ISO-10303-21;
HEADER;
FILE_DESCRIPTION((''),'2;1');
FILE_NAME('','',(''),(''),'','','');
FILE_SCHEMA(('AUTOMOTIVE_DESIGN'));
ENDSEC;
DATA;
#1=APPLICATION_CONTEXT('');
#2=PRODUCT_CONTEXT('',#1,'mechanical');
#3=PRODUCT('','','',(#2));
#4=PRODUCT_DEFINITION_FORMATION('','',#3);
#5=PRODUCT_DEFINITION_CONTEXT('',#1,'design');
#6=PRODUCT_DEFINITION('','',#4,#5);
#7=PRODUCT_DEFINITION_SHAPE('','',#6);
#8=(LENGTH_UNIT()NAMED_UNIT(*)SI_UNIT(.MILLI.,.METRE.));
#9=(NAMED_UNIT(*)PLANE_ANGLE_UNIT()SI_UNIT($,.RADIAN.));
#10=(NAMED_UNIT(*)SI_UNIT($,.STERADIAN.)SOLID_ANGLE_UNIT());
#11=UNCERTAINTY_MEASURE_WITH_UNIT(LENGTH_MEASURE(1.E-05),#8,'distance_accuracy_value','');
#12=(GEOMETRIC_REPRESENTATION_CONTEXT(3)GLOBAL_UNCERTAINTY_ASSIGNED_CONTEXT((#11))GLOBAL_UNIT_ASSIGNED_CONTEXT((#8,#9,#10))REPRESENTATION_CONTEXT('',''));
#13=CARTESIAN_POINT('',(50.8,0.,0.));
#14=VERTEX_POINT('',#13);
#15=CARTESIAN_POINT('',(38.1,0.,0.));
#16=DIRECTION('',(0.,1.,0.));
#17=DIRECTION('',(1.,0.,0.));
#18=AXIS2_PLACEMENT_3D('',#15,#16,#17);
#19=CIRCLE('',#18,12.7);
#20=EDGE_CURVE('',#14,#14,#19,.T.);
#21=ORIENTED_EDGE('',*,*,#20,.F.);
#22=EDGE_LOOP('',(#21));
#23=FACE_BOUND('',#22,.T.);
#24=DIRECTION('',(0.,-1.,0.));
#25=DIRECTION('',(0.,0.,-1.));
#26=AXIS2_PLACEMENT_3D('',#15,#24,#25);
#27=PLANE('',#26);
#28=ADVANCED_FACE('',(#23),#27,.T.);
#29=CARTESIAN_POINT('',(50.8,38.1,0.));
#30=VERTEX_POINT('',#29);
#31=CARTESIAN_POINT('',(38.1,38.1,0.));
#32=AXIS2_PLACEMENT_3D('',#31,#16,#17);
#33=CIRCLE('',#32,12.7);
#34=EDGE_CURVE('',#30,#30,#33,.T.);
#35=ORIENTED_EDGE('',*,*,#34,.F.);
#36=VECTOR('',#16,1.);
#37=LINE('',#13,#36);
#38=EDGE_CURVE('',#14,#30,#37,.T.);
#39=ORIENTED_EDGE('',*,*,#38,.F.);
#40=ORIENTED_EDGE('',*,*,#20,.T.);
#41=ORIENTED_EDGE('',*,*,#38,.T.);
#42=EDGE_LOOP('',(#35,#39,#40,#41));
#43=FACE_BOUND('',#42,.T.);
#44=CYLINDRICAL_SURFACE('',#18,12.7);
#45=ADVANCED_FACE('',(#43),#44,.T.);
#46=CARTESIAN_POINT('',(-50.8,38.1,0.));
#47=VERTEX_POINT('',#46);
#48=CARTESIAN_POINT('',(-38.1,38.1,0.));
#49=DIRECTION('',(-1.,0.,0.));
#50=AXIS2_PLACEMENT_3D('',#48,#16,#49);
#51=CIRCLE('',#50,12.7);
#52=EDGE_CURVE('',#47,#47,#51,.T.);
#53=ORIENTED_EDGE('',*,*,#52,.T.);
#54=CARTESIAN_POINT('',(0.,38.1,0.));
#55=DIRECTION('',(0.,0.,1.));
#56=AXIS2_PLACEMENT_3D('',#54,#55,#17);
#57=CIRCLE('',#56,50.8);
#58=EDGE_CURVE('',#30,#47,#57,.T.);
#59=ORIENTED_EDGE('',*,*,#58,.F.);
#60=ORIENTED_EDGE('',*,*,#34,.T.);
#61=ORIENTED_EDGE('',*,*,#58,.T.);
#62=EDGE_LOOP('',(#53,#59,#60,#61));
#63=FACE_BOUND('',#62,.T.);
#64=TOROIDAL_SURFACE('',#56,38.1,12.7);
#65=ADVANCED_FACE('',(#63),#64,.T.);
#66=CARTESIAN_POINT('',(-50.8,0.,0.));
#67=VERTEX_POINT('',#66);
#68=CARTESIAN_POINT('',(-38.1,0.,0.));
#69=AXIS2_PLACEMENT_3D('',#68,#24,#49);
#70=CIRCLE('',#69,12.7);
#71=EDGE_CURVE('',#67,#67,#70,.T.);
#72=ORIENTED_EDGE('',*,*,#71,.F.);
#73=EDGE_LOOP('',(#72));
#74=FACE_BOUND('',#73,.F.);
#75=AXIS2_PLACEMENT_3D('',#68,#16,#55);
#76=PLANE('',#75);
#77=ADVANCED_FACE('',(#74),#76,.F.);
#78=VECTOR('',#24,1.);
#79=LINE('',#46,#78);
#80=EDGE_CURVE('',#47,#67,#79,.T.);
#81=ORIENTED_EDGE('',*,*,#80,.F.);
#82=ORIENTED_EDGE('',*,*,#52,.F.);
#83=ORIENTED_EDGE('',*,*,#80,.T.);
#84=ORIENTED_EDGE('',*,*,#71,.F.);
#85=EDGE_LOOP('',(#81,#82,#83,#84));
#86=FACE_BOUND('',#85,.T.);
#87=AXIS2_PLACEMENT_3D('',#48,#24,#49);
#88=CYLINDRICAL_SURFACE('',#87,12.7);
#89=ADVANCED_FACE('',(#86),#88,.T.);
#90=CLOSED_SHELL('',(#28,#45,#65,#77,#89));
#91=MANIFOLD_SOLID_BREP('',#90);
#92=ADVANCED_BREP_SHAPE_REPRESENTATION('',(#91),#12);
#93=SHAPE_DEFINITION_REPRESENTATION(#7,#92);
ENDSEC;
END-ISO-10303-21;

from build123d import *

# Parameters (mm, degrees)
F1_R = 12.7


with BuildPart() as f2:
    # F2: sweep along a path in F0
    with BuildLine(Plane.XY) as f2_path:
        Line((38.1, 0), (38.1, 38.1))
        ThreePointArc((38.1, 38.1), (0, 76.2), (-38.1, 38.1))
        Line((-38.1, 38.1), (-38.1, 0))
    # F1 (on Front) → F2 (sweep)
    with BuildSketch(Plane.XZ):
        with Locations((38.1, 0)):
            Circle(F1_R)
    sweep(path=f2_path.line)


solid = f2.part
